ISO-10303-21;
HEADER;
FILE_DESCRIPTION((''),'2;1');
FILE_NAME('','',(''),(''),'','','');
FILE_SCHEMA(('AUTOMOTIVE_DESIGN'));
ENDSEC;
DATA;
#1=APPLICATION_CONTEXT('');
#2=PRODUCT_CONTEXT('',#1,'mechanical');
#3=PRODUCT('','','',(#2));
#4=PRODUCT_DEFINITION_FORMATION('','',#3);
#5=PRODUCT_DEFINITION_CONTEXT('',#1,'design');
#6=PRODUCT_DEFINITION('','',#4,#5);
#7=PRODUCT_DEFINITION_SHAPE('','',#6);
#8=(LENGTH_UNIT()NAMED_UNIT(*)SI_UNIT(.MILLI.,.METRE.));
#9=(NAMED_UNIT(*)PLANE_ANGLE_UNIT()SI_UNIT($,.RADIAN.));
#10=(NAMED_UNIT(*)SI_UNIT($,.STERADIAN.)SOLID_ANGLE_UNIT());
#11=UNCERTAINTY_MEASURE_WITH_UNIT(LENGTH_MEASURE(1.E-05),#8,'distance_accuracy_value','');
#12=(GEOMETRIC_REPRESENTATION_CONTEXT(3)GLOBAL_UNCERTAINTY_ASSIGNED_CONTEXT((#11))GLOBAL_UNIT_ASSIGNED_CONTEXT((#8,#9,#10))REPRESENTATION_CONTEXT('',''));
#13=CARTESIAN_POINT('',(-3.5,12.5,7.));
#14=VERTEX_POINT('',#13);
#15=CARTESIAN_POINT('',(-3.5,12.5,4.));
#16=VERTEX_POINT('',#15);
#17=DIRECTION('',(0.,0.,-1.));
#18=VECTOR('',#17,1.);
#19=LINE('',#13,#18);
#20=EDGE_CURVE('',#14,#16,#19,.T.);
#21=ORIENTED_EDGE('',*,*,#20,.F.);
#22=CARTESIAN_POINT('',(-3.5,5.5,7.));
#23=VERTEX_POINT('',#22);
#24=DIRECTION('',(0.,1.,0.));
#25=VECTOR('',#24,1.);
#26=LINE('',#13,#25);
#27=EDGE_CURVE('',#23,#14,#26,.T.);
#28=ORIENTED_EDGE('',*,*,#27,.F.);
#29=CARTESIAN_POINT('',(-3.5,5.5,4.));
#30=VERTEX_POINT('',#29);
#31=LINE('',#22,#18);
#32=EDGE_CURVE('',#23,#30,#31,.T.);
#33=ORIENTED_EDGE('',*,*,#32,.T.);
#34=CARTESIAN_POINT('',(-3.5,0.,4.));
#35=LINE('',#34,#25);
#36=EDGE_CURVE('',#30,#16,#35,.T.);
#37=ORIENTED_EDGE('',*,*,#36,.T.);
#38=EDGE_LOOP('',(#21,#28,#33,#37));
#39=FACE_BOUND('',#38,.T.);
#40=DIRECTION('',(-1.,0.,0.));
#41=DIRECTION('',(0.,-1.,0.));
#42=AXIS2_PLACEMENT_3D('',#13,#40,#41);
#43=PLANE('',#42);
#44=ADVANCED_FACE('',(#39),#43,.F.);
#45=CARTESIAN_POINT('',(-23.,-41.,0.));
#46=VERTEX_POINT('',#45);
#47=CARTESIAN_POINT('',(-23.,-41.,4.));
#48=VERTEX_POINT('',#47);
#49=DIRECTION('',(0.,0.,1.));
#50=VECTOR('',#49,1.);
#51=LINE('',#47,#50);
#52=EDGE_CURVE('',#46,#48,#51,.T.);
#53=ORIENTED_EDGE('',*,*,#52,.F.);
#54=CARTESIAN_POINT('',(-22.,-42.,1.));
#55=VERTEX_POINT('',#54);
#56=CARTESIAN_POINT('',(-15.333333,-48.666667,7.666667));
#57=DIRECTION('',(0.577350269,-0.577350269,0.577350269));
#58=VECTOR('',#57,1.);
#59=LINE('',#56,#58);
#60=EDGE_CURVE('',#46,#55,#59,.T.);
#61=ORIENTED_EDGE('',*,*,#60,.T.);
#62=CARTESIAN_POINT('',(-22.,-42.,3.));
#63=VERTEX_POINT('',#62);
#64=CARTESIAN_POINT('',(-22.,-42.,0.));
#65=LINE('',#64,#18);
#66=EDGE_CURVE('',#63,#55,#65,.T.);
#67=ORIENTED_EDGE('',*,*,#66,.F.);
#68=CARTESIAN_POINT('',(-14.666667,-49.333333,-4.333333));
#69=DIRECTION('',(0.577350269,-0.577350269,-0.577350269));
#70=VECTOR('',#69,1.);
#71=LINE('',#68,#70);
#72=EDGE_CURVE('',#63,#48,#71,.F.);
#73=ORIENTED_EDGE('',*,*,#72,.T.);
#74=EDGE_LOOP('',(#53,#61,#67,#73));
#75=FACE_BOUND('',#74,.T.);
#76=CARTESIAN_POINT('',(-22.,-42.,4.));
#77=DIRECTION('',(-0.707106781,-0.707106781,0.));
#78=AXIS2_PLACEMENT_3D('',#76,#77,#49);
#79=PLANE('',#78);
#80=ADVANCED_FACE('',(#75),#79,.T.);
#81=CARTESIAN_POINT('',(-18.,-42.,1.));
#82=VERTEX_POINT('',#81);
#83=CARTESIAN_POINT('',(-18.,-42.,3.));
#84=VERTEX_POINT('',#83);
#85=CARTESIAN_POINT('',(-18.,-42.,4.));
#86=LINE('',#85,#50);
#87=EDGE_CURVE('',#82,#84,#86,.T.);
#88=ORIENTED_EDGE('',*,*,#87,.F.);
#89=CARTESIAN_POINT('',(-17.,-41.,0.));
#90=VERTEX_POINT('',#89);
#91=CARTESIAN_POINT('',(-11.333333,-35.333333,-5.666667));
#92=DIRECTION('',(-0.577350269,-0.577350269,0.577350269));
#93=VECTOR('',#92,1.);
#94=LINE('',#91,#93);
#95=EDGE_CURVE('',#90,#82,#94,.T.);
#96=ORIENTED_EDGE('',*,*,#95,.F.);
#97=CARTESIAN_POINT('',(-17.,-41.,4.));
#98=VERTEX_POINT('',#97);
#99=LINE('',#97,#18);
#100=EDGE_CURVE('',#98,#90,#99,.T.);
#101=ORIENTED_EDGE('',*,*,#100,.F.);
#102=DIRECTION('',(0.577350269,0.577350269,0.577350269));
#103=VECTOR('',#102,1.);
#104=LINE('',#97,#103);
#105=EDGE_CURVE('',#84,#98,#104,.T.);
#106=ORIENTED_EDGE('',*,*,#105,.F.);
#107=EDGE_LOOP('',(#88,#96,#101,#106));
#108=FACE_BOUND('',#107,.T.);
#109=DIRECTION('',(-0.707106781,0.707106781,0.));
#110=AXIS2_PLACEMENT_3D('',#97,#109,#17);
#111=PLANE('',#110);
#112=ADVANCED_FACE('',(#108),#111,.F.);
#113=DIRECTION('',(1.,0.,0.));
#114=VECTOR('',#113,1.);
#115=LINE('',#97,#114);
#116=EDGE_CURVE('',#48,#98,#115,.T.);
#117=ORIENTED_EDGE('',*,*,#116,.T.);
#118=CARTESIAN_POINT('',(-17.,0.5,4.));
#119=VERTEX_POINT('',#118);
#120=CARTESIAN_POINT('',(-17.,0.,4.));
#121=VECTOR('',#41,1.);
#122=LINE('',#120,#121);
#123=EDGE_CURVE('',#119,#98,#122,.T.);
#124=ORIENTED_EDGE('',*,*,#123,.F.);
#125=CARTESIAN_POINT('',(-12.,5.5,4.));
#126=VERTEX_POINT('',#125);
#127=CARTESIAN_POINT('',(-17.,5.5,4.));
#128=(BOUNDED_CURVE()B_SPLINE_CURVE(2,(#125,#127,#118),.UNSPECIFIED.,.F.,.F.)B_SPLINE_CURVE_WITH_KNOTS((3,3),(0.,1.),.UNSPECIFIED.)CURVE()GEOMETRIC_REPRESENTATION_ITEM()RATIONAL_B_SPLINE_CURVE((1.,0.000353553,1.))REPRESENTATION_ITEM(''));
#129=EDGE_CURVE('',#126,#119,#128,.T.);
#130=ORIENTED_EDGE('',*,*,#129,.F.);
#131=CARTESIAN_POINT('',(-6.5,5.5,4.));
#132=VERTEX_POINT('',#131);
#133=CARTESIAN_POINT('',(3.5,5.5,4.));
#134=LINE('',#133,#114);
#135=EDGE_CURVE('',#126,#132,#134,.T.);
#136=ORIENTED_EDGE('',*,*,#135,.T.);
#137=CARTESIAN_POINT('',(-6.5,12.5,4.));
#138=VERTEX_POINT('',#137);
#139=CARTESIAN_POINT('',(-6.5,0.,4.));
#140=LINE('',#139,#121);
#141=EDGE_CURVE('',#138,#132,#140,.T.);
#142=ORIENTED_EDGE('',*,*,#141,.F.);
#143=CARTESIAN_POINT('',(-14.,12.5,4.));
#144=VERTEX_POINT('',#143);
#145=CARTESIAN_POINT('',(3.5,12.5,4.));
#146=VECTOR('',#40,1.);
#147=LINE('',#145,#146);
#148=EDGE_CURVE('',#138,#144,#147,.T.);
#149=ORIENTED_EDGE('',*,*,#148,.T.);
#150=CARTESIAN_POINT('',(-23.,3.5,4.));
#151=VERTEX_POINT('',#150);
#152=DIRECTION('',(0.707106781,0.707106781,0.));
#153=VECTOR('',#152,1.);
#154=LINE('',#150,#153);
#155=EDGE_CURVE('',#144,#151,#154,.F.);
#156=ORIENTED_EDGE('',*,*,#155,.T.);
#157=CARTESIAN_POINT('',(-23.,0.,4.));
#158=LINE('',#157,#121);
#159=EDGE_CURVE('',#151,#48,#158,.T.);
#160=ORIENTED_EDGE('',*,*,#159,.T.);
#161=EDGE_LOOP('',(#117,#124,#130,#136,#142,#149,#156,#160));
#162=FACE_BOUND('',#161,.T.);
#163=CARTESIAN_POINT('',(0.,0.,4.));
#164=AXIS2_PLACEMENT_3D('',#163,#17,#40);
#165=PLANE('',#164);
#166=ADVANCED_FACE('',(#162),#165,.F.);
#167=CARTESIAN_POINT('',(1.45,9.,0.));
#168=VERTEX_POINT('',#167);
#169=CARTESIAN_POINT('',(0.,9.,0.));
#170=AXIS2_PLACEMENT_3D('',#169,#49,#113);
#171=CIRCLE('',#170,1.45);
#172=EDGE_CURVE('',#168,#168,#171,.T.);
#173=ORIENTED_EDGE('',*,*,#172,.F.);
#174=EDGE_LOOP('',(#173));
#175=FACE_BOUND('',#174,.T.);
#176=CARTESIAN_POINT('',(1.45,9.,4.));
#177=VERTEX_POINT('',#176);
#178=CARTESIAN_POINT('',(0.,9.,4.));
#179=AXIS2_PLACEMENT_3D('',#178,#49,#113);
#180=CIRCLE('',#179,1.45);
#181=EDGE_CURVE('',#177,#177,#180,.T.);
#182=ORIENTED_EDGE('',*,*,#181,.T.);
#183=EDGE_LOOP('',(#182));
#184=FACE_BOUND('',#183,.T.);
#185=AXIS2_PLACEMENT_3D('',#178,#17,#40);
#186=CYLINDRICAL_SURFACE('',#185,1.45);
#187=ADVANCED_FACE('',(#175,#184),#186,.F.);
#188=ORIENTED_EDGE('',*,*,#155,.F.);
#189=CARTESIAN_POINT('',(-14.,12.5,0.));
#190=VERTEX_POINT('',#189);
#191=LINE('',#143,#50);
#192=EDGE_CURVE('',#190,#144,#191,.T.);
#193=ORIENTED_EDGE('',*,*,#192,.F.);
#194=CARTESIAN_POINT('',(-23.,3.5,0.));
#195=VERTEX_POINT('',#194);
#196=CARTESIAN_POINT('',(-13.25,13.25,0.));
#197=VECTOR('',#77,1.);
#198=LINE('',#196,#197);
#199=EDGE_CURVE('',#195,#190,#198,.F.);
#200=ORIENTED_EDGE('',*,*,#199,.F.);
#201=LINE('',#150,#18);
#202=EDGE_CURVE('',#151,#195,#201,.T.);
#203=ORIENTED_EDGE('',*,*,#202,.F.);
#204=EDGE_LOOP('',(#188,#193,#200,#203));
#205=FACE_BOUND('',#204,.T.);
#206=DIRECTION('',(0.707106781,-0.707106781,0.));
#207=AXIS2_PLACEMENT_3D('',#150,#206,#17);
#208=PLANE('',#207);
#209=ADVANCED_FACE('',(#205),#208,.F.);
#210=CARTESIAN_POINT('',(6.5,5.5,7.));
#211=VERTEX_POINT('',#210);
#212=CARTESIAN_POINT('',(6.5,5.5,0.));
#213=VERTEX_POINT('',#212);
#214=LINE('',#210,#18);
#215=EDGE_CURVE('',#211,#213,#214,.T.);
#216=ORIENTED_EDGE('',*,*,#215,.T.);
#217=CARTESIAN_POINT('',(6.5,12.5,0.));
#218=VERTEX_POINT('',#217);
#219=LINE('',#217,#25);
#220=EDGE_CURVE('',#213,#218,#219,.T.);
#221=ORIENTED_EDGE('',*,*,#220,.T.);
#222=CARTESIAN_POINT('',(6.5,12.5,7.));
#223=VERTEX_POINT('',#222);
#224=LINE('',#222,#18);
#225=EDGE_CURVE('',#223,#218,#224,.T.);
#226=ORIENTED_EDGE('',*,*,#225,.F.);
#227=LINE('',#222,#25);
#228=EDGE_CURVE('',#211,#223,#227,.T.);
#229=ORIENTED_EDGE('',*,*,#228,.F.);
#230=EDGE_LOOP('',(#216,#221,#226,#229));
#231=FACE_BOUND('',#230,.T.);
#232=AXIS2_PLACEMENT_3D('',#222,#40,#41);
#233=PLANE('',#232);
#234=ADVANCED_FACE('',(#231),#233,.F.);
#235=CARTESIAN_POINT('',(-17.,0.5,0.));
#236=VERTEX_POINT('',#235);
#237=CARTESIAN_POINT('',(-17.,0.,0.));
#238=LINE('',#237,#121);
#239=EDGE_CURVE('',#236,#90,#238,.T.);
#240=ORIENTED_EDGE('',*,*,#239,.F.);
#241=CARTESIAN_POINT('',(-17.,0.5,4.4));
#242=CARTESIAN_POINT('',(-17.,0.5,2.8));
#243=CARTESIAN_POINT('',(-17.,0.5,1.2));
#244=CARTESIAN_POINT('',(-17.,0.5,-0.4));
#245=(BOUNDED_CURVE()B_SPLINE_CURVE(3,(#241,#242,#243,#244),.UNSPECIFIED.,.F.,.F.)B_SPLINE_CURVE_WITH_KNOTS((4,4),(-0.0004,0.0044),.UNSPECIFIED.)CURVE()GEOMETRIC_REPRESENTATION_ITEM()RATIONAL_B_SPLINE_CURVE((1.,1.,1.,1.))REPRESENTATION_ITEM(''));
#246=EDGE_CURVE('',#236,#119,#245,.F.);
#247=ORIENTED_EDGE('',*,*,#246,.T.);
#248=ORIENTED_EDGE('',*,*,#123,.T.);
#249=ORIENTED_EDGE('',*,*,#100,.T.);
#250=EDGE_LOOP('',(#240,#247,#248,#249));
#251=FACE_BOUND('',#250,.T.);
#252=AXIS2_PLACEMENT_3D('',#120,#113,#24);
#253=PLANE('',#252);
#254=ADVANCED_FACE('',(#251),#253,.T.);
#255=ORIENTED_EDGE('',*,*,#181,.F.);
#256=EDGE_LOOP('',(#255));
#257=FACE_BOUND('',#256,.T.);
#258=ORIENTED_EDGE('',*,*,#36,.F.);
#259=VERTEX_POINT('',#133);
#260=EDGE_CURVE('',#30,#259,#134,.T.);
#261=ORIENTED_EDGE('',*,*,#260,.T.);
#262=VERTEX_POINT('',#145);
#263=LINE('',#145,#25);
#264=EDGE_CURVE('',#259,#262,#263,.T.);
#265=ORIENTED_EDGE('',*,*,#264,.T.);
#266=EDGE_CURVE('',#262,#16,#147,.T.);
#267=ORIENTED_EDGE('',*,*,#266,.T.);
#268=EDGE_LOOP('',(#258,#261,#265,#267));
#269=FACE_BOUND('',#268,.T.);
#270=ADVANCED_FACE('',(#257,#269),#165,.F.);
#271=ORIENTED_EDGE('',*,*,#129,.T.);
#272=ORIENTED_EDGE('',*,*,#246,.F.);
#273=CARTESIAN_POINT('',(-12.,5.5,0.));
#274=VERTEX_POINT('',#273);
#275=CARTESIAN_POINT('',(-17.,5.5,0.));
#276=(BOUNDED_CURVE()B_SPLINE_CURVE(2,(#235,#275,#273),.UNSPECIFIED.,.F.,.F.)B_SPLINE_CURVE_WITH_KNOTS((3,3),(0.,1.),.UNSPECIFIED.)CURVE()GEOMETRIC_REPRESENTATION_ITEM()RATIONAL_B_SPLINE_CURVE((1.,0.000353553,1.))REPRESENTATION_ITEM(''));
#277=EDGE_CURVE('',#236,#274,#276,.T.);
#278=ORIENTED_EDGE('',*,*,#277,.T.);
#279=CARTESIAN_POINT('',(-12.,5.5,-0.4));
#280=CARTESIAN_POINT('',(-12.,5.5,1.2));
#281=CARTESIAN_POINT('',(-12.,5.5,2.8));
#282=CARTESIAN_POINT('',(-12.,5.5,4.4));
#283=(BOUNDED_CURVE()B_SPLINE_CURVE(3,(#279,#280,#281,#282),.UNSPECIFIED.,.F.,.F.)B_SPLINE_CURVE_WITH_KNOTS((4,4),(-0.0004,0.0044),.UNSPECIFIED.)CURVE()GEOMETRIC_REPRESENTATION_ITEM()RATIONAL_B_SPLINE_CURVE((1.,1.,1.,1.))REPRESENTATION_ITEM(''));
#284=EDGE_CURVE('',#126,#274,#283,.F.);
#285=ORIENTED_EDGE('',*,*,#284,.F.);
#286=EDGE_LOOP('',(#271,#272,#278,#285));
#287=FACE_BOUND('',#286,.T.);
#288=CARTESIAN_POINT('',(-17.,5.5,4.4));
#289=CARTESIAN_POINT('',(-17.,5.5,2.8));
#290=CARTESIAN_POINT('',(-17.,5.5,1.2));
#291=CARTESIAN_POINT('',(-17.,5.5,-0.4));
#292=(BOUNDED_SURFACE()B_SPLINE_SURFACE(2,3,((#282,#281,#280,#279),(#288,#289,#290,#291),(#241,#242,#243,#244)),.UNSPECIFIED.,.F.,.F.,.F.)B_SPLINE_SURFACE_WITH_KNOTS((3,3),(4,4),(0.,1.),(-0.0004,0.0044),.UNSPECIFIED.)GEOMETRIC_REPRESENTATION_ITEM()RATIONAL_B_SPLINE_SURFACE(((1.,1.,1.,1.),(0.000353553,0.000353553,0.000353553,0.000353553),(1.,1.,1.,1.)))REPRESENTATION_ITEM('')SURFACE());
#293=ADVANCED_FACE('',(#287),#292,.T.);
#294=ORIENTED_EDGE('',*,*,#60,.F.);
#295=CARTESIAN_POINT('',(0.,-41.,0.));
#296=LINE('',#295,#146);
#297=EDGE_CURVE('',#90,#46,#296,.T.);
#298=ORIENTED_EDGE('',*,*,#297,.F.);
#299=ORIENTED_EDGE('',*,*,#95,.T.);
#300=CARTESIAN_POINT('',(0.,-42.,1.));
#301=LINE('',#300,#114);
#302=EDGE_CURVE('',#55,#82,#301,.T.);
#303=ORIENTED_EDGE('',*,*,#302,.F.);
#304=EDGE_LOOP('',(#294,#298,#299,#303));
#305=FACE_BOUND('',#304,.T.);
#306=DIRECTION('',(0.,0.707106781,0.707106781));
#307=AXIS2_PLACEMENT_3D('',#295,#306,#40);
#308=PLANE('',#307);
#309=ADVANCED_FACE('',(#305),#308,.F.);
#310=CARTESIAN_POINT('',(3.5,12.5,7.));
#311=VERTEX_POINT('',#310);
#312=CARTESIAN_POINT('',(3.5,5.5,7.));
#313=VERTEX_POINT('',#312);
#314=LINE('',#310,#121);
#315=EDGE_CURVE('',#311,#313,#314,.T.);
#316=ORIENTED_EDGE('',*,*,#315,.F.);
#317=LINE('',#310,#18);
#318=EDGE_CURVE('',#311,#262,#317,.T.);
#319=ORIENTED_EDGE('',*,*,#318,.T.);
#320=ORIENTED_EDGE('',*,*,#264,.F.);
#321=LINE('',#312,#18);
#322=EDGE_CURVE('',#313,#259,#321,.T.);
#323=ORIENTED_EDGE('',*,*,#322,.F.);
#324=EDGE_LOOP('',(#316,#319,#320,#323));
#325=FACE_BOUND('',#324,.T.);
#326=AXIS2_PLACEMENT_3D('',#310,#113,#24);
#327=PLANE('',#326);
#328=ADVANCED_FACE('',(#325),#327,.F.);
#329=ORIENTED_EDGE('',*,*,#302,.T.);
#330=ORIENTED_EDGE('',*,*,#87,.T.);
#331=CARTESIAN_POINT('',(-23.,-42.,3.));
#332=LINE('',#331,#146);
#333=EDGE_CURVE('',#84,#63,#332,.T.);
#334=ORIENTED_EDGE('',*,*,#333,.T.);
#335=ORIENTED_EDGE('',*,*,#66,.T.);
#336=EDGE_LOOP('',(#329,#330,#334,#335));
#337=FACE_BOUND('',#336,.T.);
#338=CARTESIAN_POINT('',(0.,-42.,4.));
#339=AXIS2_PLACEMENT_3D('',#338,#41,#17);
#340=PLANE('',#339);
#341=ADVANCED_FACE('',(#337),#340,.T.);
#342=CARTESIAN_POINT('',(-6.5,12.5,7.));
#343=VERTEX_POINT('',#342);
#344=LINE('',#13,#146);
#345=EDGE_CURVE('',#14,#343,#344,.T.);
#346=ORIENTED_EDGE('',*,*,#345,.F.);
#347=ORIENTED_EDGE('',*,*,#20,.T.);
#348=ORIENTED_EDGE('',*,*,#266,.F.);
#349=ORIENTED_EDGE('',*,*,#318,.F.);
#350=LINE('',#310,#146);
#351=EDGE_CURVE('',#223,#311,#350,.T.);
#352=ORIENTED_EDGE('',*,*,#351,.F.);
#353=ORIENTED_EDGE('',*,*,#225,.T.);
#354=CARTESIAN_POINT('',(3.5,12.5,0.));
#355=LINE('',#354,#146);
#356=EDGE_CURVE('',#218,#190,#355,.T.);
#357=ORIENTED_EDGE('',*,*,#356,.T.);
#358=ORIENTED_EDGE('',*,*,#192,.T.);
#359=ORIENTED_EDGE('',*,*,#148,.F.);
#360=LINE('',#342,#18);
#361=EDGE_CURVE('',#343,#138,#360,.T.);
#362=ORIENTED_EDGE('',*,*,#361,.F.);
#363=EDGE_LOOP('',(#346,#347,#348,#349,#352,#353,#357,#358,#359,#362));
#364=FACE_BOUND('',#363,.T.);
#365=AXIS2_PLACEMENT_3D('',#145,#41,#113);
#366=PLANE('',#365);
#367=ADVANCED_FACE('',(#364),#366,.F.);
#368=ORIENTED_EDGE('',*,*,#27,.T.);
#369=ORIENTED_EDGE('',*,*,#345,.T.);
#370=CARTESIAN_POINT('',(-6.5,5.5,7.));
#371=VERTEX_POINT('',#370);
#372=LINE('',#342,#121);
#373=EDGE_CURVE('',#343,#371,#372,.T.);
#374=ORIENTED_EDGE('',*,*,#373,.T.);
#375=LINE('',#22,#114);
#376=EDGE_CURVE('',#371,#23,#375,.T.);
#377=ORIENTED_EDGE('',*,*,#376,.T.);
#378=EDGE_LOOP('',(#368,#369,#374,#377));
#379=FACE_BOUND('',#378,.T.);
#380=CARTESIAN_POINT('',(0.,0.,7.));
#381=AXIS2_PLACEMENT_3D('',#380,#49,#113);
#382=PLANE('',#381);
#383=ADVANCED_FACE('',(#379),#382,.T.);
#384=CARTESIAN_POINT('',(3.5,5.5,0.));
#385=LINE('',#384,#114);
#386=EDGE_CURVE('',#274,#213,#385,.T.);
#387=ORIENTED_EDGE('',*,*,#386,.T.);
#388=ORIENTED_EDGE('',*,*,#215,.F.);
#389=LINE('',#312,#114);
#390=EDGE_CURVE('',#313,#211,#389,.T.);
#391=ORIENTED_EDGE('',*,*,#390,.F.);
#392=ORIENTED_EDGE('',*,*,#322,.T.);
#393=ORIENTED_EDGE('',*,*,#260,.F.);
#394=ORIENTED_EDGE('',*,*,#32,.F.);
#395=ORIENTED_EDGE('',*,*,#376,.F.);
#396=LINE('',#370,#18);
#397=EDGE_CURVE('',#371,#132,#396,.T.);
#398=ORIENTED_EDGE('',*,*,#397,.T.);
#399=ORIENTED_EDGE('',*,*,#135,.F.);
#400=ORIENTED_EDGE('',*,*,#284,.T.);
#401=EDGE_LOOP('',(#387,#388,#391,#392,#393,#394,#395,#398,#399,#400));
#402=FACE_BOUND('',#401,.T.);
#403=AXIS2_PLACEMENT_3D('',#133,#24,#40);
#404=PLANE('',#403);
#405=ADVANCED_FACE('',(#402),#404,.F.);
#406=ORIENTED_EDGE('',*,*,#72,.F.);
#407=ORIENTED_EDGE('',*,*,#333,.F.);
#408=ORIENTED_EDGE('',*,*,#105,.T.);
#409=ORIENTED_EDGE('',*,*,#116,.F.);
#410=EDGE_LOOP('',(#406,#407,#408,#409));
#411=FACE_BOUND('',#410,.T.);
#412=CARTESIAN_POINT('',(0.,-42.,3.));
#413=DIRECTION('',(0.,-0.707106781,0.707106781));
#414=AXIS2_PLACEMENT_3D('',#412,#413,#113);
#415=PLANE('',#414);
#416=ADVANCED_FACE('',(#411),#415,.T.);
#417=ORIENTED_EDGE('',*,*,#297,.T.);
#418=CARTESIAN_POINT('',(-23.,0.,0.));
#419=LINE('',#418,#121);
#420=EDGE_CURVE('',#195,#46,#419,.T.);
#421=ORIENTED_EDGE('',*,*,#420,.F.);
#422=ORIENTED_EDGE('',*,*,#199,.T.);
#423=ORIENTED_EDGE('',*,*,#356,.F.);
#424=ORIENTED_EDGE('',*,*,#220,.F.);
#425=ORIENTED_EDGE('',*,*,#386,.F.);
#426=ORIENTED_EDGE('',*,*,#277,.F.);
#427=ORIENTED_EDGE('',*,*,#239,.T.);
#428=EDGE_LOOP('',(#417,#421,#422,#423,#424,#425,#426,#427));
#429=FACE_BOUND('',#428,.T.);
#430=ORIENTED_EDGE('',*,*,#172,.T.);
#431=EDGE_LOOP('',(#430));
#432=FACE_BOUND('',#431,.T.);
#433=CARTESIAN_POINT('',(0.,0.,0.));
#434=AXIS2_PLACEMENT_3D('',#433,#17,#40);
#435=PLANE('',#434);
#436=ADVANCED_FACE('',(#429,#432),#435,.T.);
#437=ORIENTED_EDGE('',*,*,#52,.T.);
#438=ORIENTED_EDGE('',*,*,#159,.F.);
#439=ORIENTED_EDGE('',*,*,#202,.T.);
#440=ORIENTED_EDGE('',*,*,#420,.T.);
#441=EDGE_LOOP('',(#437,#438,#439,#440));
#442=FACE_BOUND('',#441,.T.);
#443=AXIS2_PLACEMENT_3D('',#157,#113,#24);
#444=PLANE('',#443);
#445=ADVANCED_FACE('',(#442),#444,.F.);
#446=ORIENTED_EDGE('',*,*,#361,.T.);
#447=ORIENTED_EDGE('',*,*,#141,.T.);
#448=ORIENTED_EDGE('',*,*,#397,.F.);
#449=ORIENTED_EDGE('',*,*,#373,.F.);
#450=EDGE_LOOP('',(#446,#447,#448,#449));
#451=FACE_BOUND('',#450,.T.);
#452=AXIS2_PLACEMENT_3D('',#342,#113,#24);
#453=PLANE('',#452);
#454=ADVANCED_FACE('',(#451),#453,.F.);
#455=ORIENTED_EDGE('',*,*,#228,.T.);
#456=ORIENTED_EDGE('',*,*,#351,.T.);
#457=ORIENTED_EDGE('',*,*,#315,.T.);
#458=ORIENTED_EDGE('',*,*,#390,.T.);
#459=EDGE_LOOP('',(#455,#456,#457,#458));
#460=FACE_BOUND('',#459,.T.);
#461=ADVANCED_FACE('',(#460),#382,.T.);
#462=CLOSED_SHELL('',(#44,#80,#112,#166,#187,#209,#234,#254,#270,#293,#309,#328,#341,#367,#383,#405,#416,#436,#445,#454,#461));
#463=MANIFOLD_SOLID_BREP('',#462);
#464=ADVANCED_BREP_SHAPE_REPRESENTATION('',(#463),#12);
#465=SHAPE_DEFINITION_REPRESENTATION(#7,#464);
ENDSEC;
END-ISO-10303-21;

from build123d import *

# Parameters (mm, degrees)
SKETCH2_W           = 18.5
SKETCH2_H           = 7
SKETCH2_R           = 1.45
BOSS_EXTRUDE2_DEPTH = 4
SKETCH4_W           = 3
SKETCH4_H           = 7
BOSS_EXTRUDE3_DEPTH = 7
SKETCH5_W           = 2
SKETCH5_H           = 7
SKETCH5_W_2         = 6
SKETCH5_H_2         = 54.5
BOSS_EXTRUDE4_DEPTH = 4
FILLET1_DEPTH       = 4
CHAMFER1_SIZE       = 9
CHAMFER6_SIZE       = 1


with BuildPart() as part:
    # Sketch2 → Boss-Extrude2 (new body)
    with BuildSketch(Plane.XY):
        with Locations((-5.75, 9)):
            Rectangle(SKETCH2_W, SKETCH2_H)
        with Locations((0, 9)):
            Circle(SKETCH2_R, mode=Mode.SUBTRACT)
    extrude(amount=BOSS_EXTRUDE2_DEPTH)

    # Sketch4 → Boss-Extrude3 (add)
    with BuildSketch(Plane.XY):
        with Locations((5, 9)):
            Rectangle(SKETCH4_W, SKETCH4_H)
        with Locations((-5, 9)):
            Rectangle(SKETCH4_W, SKETCH4_H)
    extrude(amount=BOSS_EXTRUDE3_DEPTH)

    # Sketch5 → Boss-Extrude4 (add)
    with BuildSketch(Plane.XY):
        with Locations((-16, 9)):
            Rectangle(SKETCH5_W, SKETCH5_H)
        with Locations((-20, -14.75)):
            Rectangle(SKETCH5_W_2, SKETCH5_H_2)
    extrude(amount=BOSS_EXTRUDE4_DEPTH)

    # Fillet1: read off the stored shape, not the designer's step
    # Fillet1 outline → Fillet1 (add)
    with BuildSketch(Plane.XY):
        with BuildLine():
            add(Edge.make_bspline(
                [(-12, 5.5), (-17, 5.5), (-17, 0.5)],
                knots=[0, 0, 0, 1, 1, 1], degree=2, weights=[1, 0.000353553, 1]))
            Line((-12, 5.5), (-17, 5.5))
            Line((-17, 5.5), (-17, 0.5))
        make_face()
    extrude(amount=FILLET1_DEPTH)

    # Chamfer1
    chamfer1_edges = [part.edges().sort_by_distance(p)[0] for p in [
        (-23, 12.5, 2),
    ]]
    chamfer(chamfer1_edges, length=CHAMFER1_SIZE)

    # Chamfer6
    chamfer6_edges = [part.edges().sort_by_distance(p)[0] for p in [
        (-20, -42, 4),
        (-23, -42, 2),
        (-17, -42, 2),
        (-20, -42, 0),
    ]]
    chamfer(chamfer6_edges, length=CHAMFER6_SIZE)


solid = part.part
